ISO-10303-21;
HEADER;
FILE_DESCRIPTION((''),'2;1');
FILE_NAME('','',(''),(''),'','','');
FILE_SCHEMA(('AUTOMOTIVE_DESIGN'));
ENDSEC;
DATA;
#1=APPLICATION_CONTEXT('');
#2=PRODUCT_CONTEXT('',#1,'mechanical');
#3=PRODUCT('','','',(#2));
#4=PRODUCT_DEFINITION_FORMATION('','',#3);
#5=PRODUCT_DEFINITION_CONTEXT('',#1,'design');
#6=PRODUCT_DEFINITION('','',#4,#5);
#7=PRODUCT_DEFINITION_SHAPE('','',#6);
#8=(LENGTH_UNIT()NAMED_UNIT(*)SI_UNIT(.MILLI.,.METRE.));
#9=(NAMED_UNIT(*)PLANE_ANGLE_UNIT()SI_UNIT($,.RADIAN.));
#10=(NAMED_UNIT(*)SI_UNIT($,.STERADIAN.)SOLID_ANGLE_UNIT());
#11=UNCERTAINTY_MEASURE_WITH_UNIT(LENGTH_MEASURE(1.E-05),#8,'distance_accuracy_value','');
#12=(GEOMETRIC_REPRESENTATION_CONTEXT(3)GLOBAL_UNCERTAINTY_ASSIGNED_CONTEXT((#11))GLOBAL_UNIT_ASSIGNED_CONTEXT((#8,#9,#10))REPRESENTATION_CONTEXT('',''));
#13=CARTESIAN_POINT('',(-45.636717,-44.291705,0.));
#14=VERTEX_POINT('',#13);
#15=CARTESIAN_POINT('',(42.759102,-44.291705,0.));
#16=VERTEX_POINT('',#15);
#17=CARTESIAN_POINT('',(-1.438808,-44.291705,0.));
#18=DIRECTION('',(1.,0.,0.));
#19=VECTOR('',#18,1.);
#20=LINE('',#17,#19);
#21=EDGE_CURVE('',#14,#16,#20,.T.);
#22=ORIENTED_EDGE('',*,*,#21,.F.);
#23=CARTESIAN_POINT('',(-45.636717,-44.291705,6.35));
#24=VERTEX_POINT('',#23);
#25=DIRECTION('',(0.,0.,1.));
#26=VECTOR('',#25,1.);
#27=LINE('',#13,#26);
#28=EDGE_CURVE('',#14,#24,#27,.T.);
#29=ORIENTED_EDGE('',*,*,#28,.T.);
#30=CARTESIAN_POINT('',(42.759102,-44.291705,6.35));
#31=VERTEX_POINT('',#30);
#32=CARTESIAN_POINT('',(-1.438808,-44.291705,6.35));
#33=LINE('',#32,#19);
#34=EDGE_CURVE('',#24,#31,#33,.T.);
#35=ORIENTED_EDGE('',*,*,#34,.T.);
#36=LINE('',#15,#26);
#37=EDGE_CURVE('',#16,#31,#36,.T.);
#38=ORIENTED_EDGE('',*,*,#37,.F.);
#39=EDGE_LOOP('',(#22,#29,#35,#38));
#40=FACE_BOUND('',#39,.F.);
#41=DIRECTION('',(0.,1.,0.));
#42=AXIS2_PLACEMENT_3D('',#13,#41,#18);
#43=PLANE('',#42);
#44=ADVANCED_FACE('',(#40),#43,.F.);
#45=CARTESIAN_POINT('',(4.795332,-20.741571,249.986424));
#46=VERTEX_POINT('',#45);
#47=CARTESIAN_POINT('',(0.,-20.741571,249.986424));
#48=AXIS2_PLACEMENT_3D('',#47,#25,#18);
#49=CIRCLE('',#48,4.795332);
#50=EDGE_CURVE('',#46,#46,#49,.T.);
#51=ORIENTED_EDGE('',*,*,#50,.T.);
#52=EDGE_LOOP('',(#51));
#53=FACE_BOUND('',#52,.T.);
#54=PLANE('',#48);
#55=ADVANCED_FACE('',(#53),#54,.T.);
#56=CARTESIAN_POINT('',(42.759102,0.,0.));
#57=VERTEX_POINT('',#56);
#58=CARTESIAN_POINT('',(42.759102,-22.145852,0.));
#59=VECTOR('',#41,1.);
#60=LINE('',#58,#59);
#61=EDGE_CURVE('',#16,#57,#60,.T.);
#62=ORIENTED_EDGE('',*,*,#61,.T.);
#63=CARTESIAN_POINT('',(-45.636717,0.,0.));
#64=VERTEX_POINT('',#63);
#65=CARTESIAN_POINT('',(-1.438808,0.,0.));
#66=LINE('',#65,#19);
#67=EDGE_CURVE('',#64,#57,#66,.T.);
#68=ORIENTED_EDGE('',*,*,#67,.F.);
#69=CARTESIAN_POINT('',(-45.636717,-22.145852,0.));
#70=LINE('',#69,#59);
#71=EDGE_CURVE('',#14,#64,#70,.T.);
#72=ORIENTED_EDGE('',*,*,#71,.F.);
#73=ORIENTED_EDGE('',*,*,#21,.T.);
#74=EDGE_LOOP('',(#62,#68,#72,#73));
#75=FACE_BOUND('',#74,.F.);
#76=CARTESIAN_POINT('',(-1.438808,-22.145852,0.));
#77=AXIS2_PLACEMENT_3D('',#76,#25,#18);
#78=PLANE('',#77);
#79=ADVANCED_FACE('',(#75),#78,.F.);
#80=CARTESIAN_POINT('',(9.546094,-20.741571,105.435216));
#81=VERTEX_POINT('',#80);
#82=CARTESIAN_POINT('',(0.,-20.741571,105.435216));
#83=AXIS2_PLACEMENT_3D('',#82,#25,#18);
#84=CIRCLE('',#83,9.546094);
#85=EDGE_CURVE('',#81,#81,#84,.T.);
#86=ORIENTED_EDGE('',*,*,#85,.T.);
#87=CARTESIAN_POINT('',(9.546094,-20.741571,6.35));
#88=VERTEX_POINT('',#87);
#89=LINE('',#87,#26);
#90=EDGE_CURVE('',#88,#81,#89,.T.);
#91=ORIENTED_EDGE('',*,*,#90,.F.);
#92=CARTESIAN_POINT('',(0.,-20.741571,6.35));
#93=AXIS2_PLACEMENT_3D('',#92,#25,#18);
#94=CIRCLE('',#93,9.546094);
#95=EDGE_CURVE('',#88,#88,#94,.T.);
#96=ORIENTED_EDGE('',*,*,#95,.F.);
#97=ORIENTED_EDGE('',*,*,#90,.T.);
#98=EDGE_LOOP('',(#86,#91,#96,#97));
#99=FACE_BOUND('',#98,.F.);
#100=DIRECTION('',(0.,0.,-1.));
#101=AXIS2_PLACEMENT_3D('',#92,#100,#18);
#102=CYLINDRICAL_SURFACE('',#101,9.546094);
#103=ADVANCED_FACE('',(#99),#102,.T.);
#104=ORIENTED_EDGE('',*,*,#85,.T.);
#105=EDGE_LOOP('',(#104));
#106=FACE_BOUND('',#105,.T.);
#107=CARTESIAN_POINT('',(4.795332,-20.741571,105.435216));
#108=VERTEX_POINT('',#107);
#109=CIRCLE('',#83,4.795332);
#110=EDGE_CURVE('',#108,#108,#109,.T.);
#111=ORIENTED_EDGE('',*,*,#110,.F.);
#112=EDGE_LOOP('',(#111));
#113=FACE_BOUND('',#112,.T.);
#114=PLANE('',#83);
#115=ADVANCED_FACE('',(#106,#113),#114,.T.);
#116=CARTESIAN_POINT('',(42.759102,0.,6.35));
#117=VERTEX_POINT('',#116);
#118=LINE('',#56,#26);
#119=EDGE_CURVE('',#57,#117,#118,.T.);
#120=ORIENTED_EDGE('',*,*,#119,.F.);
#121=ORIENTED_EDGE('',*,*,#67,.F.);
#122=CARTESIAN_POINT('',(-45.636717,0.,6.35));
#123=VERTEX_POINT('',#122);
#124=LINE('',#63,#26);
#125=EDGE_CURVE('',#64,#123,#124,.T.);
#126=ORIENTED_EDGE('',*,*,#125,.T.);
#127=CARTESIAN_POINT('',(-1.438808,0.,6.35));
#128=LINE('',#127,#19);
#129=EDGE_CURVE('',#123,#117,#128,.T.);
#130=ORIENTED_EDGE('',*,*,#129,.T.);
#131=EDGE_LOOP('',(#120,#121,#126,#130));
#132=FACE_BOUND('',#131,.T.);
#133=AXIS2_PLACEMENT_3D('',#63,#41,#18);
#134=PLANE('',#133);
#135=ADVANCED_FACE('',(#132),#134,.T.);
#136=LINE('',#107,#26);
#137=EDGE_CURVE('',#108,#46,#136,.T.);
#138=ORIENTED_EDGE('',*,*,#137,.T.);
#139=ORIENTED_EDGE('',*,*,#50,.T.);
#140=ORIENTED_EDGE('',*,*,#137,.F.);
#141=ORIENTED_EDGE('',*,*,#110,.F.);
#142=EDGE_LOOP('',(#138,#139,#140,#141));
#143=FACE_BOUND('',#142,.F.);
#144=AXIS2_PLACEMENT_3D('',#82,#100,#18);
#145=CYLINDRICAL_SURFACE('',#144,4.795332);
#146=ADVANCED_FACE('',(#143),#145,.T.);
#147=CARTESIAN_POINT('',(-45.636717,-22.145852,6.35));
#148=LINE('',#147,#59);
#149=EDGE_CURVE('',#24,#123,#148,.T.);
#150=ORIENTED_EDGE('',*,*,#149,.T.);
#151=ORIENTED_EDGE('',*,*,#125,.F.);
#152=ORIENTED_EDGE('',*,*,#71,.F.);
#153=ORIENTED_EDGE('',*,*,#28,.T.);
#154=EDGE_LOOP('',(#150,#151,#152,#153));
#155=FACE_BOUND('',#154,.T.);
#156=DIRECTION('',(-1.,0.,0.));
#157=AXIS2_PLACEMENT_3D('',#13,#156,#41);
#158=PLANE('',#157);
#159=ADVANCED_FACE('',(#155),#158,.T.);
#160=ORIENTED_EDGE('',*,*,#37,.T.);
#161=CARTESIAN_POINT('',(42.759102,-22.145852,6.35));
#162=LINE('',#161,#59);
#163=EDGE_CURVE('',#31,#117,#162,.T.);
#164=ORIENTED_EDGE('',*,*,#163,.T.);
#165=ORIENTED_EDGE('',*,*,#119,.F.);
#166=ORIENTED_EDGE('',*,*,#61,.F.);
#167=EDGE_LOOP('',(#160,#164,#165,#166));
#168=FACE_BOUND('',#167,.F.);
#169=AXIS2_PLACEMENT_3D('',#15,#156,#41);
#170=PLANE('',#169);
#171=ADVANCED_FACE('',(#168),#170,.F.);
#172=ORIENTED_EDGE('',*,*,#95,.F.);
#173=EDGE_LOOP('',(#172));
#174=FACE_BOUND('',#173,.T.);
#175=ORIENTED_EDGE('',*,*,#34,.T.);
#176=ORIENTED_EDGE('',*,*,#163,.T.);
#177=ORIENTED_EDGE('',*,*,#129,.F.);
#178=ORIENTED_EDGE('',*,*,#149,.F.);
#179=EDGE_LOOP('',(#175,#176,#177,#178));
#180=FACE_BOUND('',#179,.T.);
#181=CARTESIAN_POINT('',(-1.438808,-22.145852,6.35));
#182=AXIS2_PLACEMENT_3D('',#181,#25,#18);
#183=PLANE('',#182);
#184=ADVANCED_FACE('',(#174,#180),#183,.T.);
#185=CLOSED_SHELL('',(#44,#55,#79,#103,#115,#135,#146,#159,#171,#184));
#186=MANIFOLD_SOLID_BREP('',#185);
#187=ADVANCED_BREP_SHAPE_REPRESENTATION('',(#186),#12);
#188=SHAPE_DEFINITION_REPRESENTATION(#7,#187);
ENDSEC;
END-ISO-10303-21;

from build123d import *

# Parameters (mm, degrees)
F0_W     = 88.395819068
F0_H     = 44.2917048931
F1_DEPTH = 6.35
F2_R     = 9.5460938565
F3_DEPTH = 99.0852161
F4_R     = 4.7953323776
F5_DEPTH = 144.5512078


# Not quite as in the source:
# - an extrude ends at something that could not be found from the text; its depth is read off the source's solid


with BuildPart() as f1:
    # F0 (on Top) → F1 (new body)
    with BuildSketch(Plane.XY):
        with Locations((-1.4388076961, -22.1458524466)):
            Rectangle(F0_W, F0_H)
    extrude(amount=F1_DEPTH)

    # F2 (on face) → F3 (join, through all)
    with BuildSketch(Plane.XY.offset(6.35)):
        with Locations((0, -20.7415707409)):
            Circle(F2_R)
    extrude(amount=F3_DEPTH)

    # F4 (on face) → F5 (join, through all)
    with BuildSketch(Plane.XY.offset(105.4352161291)):
        with Locations((0, -20.7415707409)):
            Circle(F4_R)
    extrude(amount=F5_DEPTH)


solid = f1.part
